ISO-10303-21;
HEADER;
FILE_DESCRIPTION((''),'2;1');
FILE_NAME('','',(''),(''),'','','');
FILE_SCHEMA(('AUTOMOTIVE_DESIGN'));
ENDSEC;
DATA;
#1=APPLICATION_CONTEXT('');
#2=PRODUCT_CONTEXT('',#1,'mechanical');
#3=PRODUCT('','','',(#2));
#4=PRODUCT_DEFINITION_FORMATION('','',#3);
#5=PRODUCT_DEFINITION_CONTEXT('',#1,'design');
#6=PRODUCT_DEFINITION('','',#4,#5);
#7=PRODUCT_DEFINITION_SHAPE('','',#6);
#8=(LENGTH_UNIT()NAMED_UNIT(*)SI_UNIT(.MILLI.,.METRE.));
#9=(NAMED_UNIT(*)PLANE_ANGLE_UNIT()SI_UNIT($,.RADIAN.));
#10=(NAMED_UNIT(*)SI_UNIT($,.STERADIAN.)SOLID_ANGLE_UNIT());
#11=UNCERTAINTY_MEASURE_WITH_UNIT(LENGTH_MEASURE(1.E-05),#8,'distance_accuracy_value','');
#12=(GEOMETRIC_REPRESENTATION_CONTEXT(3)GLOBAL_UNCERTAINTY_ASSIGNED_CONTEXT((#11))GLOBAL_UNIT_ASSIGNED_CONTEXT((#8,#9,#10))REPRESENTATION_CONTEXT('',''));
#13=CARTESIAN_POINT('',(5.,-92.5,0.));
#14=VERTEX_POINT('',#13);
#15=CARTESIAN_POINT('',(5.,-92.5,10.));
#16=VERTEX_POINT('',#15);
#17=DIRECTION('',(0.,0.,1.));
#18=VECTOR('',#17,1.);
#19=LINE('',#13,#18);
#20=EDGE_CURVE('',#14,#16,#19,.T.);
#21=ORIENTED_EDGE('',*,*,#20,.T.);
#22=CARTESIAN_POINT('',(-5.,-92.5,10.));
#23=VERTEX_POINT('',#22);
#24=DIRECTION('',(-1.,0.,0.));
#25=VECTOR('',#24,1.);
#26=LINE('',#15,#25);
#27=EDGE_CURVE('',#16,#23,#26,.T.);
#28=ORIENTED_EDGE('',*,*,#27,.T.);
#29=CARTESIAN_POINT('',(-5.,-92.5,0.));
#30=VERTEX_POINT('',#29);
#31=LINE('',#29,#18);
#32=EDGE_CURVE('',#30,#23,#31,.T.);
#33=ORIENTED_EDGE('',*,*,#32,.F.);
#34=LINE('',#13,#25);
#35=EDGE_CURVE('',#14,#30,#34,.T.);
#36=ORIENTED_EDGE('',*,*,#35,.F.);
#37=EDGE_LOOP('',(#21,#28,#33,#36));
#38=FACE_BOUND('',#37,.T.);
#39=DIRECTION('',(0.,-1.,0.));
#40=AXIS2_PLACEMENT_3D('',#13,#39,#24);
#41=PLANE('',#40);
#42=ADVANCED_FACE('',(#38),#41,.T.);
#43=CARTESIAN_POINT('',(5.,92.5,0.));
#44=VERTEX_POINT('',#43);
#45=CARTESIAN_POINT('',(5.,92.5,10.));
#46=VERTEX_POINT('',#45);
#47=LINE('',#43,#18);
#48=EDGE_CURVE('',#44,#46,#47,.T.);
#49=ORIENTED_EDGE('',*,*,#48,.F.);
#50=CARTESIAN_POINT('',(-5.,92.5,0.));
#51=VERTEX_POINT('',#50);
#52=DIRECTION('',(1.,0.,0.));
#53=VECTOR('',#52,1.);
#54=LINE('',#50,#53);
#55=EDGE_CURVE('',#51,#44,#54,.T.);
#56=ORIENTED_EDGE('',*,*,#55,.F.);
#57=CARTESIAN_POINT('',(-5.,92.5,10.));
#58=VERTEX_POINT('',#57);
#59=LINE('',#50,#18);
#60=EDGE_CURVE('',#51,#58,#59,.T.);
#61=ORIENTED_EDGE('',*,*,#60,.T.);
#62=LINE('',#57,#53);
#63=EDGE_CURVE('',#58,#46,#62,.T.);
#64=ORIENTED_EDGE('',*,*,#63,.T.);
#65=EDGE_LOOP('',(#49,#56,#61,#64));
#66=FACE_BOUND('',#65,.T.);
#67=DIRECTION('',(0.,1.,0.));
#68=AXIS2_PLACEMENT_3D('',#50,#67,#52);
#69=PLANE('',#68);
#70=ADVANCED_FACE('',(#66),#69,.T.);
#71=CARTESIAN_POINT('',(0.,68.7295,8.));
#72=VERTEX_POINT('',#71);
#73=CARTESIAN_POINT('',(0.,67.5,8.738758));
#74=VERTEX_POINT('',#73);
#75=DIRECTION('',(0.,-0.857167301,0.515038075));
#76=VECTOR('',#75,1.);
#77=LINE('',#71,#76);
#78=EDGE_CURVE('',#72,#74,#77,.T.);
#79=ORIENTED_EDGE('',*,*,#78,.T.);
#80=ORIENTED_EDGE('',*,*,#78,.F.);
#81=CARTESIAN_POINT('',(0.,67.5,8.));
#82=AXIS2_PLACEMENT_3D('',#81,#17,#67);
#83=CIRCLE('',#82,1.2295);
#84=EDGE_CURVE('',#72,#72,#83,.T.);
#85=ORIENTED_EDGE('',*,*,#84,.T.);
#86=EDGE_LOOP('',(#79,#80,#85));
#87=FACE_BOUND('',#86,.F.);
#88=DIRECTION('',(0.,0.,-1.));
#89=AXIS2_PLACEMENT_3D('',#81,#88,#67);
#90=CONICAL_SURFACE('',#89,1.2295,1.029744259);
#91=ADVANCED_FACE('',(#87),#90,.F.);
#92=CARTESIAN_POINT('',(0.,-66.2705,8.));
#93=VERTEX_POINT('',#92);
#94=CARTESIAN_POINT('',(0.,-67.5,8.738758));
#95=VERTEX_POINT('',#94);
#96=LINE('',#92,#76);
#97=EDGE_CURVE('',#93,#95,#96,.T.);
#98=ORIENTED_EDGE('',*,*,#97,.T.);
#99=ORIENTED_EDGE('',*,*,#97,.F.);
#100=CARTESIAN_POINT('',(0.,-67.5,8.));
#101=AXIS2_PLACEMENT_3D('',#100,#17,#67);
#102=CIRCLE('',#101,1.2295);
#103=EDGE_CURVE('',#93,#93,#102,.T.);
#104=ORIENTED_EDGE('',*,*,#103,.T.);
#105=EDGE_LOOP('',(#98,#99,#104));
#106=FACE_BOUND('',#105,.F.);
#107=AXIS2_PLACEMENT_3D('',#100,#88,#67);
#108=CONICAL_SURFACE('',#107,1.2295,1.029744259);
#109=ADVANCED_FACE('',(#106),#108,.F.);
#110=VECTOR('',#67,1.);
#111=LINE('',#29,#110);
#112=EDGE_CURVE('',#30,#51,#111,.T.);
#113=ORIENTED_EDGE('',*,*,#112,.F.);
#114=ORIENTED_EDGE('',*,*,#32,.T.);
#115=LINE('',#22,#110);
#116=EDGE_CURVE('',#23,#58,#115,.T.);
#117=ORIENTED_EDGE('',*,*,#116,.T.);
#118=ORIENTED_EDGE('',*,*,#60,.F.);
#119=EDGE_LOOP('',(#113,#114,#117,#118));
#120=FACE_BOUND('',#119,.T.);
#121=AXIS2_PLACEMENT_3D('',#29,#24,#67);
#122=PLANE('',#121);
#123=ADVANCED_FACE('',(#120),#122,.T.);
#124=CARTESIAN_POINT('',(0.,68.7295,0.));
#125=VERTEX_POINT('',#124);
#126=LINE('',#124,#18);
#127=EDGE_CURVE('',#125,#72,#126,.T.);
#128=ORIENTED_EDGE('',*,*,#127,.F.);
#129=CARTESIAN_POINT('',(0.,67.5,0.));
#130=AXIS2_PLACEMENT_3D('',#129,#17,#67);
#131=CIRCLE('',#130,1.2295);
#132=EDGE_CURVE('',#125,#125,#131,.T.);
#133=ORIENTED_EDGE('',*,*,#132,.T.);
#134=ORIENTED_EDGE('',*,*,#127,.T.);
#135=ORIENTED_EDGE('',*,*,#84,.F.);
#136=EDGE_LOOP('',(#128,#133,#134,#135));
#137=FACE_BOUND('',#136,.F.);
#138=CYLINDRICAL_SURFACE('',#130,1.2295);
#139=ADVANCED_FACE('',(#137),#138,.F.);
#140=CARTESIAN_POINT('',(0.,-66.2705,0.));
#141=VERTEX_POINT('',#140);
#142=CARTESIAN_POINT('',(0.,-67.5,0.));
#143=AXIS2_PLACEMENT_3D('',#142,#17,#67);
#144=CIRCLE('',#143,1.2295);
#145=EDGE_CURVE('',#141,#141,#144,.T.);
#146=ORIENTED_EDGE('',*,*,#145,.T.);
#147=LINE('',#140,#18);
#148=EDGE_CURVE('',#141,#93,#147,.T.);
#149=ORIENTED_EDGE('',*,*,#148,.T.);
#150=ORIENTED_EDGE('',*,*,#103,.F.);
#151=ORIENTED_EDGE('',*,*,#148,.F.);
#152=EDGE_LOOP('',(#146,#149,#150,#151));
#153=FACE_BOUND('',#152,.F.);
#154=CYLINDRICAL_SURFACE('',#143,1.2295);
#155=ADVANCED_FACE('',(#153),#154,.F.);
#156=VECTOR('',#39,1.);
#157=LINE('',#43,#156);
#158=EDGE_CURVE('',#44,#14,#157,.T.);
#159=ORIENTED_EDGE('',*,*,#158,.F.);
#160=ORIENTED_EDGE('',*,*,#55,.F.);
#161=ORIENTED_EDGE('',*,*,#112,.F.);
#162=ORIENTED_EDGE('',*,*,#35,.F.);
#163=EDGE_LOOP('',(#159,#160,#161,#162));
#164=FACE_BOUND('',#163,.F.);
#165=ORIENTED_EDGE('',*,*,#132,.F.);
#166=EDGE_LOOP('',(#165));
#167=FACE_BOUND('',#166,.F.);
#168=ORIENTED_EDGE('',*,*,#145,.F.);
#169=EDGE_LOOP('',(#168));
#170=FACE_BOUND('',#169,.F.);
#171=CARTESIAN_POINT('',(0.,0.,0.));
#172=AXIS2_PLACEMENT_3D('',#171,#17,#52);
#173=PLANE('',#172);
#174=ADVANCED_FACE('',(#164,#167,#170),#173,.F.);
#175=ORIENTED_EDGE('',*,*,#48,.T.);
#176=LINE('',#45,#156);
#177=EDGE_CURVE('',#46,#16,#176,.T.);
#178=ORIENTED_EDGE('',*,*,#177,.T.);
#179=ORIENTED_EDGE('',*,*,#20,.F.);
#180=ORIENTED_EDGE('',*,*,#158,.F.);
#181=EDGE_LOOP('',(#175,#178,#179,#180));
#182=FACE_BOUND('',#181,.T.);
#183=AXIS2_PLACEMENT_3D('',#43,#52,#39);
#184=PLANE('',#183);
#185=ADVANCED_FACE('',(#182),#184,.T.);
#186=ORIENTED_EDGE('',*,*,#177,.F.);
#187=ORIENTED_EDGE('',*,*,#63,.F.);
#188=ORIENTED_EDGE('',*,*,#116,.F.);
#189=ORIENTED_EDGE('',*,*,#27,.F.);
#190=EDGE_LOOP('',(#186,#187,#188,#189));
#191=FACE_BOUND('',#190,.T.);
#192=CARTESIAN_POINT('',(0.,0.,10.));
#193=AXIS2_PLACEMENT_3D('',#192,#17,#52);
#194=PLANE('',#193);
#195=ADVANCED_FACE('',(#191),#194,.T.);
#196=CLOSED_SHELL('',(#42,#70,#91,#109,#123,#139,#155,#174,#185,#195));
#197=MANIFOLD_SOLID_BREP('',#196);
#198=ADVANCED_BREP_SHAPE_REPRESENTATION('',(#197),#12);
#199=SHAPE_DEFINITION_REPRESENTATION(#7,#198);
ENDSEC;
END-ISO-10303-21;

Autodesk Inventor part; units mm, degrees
ref_plane "YZ Plane" through (0, 0, 0) normal (1, 0, 0) x (0, 1, 0)
ref_plane "XZ Plane" through (0, 0, 0) normal (0, 1, 0) x (-1, 0, 0)
ref_plane "XY Plane" through (0, 0, 0) normal (0, 0, 1) x (1, 0, 0)
sketch "Esboço1" plane through (0, 0, 0) normal (0, 0, 1) x (1, 0, 0)
  line L0 (-7, 0) -> (7, 0) construction
  line L1 (0, -129.5) -> (0, 129.5) construction
  line L2 (-5, 92.5) -> (5, 92.5)
  line L3 (5, 92.5) -> (5, -92.5)
  line L4 (5, -92.5) -> (-5, -92.5)
  line L5 (-5, -92.5) -> (-5, 92.5)
  point P0 (0, 0)
  point P1 (0, -67.5)
  point P2 (0, 0)
  point P3 (0, 67.5)
  dimension "d0" = 10
  dimension "d1" = 185
  dimension "d4" = 67.5
extrude "Extrusão1" add sketch "Esboço1" along normal blind 10
hole "Furo1" at (0, -67.5, 0) at (0, 67.5, 0) direction (0, 0, 1) diameter 2.459 depth 8 tip angle 118 thread size "M3x0.5" class "6H" standard "ISO Metric profile"
equation "\"d2\" = d0"
properties part number "VEJ-00-014" material "Durastone BK"
